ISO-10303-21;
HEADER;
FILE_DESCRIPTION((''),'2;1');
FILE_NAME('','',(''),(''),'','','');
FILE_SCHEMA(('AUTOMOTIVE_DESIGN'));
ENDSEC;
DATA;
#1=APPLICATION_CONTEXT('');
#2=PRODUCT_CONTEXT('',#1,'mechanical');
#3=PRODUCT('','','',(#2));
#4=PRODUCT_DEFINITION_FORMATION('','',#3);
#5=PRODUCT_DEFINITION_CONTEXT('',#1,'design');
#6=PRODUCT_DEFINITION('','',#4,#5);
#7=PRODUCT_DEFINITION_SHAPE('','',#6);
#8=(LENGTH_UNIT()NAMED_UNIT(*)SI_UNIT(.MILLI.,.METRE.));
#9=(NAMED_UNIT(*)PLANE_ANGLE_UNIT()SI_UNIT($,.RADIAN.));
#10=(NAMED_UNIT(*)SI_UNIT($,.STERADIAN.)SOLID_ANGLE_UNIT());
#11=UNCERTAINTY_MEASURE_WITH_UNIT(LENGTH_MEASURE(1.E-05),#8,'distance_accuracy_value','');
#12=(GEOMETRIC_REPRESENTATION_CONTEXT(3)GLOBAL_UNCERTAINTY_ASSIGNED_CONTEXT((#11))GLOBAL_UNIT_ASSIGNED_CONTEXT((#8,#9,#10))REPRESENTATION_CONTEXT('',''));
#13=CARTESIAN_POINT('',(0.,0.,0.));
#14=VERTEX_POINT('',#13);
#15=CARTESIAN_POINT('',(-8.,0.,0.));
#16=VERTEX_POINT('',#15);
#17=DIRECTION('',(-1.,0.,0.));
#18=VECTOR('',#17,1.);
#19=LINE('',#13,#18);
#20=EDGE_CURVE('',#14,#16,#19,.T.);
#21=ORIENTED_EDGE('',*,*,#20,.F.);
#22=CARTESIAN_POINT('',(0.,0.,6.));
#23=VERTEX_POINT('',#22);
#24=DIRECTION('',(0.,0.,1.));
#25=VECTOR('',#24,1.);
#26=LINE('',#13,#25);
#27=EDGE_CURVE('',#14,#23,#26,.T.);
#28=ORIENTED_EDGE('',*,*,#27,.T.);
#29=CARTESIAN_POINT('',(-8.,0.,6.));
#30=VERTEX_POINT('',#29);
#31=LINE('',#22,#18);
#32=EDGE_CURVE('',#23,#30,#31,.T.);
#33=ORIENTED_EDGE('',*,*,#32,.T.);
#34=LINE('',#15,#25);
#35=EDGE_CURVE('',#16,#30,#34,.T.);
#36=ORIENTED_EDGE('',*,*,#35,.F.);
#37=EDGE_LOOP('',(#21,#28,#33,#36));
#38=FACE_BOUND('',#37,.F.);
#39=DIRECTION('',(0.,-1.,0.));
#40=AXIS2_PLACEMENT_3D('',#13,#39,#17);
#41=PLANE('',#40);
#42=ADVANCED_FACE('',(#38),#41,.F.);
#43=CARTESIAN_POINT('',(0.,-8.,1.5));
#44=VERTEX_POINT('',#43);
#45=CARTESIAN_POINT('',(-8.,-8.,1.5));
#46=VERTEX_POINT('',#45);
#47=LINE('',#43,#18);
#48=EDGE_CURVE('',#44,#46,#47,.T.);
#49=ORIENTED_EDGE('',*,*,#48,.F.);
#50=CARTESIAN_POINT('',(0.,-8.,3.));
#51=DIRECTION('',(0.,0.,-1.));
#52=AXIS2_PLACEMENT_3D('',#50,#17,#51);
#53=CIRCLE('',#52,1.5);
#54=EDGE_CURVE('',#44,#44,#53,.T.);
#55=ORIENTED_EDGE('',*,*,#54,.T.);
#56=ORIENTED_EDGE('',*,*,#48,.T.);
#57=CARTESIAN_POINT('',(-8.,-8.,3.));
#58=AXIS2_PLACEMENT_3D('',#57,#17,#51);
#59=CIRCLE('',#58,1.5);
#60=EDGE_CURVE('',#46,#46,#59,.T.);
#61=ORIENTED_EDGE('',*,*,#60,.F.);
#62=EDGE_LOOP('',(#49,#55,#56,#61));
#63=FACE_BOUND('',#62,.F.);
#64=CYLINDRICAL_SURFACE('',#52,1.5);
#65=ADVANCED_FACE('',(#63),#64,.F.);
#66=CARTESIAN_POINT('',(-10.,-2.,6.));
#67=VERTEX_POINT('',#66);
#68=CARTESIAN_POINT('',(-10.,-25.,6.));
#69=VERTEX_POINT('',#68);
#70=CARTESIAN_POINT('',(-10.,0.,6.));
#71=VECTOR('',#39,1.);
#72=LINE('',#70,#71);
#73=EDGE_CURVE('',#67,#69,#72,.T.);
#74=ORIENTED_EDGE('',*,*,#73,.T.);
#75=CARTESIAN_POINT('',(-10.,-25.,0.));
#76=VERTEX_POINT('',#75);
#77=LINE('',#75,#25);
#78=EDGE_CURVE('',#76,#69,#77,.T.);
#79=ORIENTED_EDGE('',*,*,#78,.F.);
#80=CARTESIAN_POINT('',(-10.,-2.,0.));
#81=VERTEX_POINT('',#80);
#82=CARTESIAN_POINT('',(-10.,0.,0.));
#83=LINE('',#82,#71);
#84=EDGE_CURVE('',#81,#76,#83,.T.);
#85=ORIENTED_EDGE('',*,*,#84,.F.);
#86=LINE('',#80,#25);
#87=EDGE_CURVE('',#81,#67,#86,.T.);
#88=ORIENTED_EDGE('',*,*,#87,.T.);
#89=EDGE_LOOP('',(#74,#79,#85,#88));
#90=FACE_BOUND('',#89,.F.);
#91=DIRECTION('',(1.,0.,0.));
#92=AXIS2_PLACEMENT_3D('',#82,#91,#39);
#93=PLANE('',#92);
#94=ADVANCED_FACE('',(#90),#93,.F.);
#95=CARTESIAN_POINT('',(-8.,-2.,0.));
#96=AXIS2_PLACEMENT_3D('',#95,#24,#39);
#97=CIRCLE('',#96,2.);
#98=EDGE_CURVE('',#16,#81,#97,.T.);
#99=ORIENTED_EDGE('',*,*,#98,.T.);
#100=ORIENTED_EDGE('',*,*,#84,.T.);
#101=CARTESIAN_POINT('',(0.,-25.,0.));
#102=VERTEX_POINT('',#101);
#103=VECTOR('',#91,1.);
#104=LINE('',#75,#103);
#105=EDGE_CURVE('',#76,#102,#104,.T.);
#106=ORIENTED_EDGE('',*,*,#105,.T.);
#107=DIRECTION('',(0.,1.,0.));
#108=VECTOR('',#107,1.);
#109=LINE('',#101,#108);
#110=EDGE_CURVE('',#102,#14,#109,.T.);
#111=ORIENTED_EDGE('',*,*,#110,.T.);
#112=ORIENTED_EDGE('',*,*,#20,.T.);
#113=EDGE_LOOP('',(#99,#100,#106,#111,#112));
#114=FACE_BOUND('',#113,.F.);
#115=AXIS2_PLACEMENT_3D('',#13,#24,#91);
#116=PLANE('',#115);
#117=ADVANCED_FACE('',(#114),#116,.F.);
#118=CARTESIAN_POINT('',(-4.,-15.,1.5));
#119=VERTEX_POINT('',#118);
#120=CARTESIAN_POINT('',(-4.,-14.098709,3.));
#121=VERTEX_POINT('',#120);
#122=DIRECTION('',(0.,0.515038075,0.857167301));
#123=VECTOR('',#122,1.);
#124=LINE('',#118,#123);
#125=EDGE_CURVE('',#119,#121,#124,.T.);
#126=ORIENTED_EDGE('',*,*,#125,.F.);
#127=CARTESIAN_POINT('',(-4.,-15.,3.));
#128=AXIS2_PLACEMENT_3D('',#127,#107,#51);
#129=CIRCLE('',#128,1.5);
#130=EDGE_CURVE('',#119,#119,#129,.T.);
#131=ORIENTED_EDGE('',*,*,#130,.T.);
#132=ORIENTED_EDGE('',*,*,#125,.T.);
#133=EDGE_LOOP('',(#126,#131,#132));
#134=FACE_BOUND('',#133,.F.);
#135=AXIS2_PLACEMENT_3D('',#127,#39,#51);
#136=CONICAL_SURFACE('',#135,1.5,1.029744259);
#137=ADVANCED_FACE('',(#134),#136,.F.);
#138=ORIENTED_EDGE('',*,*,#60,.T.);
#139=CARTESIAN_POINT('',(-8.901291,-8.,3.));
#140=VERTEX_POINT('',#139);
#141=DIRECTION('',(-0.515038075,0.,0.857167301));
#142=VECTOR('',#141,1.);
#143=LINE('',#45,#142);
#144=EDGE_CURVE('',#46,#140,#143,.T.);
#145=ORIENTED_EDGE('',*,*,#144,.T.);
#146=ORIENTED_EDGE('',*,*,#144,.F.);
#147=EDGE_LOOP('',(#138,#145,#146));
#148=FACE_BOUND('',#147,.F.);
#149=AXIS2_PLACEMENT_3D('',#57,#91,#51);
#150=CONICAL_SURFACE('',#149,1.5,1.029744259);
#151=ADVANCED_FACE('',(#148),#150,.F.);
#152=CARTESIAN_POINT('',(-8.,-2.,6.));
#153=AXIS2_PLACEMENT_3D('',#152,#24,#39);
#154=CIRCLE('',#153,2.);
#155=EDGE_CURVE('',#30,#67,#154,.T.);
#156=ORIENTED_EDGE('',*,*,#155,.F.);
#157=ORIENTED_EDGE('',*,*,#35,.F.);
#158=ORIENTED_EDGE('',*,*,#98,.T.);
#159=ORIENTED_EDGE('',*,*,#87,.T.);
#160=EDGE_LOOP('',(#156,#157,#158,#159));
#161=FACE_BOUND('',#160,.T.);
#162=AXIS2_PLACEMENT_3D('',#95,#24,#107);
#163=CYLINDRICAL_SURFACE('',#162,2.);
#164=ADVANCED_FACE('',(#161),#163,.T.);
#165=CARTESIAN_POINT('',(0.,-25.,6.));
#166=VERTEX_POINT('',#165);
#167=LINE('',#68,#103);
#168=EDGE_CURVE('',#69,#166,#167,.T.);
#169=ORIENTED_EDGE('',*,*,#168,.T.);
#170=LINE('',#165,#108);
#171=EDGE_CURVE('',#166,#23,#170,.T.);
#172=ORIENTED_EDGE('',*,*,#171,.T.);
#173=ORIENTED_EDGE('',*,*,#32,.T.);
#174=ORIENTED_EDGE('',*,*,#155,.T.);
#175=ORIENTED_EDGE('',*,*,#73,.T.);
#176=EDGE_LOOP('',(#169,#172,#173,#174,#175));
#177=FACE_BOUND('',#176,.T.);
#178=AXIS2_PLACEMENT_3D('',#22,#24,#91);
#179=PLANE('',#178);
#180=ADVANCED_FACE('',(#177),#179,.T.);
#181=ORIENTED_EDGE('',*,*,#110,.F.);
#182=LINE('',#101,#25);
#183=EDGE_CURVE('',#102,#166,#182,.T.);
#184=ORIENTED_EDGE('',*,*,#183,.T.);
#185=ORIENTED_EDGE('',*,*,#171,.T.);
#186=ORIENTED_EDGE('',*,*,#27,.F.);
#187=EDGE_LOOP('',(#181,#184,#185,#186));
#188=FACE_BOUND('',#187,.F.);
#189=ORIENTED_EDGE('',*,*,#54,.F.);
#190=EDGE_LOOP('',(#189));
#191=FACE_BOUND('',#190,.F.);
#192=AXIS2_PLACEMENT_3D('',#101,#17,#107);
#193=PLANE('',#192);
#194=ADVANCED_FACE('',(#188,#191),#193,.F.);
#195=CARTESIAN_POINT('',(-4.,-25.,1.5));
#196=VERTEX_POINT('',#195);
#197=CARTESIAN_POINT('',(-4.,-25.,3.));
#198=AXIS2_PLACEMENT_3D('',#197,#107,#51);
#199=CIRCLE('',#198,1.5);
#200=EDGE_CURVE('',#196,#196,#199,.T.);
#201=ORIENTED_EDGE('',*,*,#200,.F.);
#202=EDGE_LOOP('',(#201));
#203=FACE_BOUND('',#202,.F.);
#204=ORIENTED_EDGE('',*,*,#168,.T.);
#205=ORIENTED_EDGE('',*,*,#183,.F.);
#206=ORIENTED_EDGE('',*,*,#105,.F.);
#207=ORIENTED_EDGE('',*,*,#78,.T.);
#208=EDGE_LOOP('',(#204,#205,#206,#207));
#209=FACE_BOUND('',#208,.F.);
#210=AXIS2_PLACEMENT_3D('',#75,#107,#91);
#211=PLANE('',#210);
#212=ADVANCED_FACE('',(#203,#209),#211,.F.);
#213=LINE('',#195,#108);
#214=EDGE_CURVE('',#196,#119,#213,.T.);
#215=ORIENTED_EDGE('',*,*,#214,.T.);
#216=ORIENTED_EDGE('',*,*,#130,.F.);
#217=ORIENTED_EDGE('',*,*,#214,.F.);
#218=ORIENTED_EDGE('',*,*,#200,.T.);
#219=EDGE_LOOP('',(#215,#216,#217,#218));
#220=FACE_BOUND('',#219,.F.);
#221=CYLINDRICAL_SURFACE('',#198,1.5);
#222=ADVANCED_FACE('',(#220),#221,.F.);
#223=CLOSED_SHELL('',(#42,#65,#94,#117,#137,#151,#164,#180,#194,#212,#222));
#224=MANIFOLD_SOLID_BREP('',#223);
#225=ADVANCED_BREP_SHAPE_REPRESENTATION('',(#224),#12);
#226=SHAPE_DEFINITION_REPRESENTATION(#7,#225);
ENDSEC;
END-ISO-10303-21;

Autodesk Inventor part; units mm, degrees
ref_plane "YZ Plane" through (0, 0, 0) normal (1, 0, 0) x (0, 1, 0)
ref_plane "XZ Plane" through (0, 0, 0) normal (0, 1, 0) x (-1, 0, 0)
ref_plane "XY Plane" through (0, 0, 0) normal (0, 0, 1) x (1, 0, 0)
sketch "Skizze3" plane through (0, 0, 0) normal (0, 0, 1) x (1, 0, 0)
  line L0 (0, 0) -> (-10, 0)
  line L1 (-10, 0) -> (-10, -25)
  line L2 (-10, -25) -> (0, -25)
  line L3 (0, -25) -> (0, 0)
  dimension "d4" = 10
  dimension "d5" = 25
extrude "Extrusion3" add sketch "Skizze3" along normal blind 6
sketch "Skizze4" plane through (-10, -25, 0) normal (0, -1, 0) x (1, 0, 0)
  line L0 (10, 0) -> (10, 6) projected
  line L1 (0, 0) -> (0, 6) projected
  point P0 (6, 3)
  point P1 (0, 3)
  dimension "d8" = 4
hole "Bohrung1" at (-4, -25, 3) direction (0, 1, 0) diameter 3 depth 10 tip angle 118
thread "Gewinde1" size "M3x0.5" class "6H" standard "ISO Metric profile" length 8
sketch "Skizze5" plane through (0, -25, 0) normal (1, 0, 0) x (0, 0, -1)
  line L0 (0, 25) -> (-6, 25) projected
  line L1 (0, 0) -> (-6, 0) projected
  point P0 (-3, 17)
  point P1 (-3, 25)
  dimension "d18" = 17
hole "Bohrung2" at (0, -8, 3) direction (-1, 0, 0) diameter 3 depth 8 tip angle 118
thread "Gewinde2" size "M3x0.5" class "6H" standard "ISO Metric profile" length 6
fillet "Rundung1" radius 2 1 edges at (-10, 0, 3)
properties part number "BT902_goteln20_23" material "Acryl"
